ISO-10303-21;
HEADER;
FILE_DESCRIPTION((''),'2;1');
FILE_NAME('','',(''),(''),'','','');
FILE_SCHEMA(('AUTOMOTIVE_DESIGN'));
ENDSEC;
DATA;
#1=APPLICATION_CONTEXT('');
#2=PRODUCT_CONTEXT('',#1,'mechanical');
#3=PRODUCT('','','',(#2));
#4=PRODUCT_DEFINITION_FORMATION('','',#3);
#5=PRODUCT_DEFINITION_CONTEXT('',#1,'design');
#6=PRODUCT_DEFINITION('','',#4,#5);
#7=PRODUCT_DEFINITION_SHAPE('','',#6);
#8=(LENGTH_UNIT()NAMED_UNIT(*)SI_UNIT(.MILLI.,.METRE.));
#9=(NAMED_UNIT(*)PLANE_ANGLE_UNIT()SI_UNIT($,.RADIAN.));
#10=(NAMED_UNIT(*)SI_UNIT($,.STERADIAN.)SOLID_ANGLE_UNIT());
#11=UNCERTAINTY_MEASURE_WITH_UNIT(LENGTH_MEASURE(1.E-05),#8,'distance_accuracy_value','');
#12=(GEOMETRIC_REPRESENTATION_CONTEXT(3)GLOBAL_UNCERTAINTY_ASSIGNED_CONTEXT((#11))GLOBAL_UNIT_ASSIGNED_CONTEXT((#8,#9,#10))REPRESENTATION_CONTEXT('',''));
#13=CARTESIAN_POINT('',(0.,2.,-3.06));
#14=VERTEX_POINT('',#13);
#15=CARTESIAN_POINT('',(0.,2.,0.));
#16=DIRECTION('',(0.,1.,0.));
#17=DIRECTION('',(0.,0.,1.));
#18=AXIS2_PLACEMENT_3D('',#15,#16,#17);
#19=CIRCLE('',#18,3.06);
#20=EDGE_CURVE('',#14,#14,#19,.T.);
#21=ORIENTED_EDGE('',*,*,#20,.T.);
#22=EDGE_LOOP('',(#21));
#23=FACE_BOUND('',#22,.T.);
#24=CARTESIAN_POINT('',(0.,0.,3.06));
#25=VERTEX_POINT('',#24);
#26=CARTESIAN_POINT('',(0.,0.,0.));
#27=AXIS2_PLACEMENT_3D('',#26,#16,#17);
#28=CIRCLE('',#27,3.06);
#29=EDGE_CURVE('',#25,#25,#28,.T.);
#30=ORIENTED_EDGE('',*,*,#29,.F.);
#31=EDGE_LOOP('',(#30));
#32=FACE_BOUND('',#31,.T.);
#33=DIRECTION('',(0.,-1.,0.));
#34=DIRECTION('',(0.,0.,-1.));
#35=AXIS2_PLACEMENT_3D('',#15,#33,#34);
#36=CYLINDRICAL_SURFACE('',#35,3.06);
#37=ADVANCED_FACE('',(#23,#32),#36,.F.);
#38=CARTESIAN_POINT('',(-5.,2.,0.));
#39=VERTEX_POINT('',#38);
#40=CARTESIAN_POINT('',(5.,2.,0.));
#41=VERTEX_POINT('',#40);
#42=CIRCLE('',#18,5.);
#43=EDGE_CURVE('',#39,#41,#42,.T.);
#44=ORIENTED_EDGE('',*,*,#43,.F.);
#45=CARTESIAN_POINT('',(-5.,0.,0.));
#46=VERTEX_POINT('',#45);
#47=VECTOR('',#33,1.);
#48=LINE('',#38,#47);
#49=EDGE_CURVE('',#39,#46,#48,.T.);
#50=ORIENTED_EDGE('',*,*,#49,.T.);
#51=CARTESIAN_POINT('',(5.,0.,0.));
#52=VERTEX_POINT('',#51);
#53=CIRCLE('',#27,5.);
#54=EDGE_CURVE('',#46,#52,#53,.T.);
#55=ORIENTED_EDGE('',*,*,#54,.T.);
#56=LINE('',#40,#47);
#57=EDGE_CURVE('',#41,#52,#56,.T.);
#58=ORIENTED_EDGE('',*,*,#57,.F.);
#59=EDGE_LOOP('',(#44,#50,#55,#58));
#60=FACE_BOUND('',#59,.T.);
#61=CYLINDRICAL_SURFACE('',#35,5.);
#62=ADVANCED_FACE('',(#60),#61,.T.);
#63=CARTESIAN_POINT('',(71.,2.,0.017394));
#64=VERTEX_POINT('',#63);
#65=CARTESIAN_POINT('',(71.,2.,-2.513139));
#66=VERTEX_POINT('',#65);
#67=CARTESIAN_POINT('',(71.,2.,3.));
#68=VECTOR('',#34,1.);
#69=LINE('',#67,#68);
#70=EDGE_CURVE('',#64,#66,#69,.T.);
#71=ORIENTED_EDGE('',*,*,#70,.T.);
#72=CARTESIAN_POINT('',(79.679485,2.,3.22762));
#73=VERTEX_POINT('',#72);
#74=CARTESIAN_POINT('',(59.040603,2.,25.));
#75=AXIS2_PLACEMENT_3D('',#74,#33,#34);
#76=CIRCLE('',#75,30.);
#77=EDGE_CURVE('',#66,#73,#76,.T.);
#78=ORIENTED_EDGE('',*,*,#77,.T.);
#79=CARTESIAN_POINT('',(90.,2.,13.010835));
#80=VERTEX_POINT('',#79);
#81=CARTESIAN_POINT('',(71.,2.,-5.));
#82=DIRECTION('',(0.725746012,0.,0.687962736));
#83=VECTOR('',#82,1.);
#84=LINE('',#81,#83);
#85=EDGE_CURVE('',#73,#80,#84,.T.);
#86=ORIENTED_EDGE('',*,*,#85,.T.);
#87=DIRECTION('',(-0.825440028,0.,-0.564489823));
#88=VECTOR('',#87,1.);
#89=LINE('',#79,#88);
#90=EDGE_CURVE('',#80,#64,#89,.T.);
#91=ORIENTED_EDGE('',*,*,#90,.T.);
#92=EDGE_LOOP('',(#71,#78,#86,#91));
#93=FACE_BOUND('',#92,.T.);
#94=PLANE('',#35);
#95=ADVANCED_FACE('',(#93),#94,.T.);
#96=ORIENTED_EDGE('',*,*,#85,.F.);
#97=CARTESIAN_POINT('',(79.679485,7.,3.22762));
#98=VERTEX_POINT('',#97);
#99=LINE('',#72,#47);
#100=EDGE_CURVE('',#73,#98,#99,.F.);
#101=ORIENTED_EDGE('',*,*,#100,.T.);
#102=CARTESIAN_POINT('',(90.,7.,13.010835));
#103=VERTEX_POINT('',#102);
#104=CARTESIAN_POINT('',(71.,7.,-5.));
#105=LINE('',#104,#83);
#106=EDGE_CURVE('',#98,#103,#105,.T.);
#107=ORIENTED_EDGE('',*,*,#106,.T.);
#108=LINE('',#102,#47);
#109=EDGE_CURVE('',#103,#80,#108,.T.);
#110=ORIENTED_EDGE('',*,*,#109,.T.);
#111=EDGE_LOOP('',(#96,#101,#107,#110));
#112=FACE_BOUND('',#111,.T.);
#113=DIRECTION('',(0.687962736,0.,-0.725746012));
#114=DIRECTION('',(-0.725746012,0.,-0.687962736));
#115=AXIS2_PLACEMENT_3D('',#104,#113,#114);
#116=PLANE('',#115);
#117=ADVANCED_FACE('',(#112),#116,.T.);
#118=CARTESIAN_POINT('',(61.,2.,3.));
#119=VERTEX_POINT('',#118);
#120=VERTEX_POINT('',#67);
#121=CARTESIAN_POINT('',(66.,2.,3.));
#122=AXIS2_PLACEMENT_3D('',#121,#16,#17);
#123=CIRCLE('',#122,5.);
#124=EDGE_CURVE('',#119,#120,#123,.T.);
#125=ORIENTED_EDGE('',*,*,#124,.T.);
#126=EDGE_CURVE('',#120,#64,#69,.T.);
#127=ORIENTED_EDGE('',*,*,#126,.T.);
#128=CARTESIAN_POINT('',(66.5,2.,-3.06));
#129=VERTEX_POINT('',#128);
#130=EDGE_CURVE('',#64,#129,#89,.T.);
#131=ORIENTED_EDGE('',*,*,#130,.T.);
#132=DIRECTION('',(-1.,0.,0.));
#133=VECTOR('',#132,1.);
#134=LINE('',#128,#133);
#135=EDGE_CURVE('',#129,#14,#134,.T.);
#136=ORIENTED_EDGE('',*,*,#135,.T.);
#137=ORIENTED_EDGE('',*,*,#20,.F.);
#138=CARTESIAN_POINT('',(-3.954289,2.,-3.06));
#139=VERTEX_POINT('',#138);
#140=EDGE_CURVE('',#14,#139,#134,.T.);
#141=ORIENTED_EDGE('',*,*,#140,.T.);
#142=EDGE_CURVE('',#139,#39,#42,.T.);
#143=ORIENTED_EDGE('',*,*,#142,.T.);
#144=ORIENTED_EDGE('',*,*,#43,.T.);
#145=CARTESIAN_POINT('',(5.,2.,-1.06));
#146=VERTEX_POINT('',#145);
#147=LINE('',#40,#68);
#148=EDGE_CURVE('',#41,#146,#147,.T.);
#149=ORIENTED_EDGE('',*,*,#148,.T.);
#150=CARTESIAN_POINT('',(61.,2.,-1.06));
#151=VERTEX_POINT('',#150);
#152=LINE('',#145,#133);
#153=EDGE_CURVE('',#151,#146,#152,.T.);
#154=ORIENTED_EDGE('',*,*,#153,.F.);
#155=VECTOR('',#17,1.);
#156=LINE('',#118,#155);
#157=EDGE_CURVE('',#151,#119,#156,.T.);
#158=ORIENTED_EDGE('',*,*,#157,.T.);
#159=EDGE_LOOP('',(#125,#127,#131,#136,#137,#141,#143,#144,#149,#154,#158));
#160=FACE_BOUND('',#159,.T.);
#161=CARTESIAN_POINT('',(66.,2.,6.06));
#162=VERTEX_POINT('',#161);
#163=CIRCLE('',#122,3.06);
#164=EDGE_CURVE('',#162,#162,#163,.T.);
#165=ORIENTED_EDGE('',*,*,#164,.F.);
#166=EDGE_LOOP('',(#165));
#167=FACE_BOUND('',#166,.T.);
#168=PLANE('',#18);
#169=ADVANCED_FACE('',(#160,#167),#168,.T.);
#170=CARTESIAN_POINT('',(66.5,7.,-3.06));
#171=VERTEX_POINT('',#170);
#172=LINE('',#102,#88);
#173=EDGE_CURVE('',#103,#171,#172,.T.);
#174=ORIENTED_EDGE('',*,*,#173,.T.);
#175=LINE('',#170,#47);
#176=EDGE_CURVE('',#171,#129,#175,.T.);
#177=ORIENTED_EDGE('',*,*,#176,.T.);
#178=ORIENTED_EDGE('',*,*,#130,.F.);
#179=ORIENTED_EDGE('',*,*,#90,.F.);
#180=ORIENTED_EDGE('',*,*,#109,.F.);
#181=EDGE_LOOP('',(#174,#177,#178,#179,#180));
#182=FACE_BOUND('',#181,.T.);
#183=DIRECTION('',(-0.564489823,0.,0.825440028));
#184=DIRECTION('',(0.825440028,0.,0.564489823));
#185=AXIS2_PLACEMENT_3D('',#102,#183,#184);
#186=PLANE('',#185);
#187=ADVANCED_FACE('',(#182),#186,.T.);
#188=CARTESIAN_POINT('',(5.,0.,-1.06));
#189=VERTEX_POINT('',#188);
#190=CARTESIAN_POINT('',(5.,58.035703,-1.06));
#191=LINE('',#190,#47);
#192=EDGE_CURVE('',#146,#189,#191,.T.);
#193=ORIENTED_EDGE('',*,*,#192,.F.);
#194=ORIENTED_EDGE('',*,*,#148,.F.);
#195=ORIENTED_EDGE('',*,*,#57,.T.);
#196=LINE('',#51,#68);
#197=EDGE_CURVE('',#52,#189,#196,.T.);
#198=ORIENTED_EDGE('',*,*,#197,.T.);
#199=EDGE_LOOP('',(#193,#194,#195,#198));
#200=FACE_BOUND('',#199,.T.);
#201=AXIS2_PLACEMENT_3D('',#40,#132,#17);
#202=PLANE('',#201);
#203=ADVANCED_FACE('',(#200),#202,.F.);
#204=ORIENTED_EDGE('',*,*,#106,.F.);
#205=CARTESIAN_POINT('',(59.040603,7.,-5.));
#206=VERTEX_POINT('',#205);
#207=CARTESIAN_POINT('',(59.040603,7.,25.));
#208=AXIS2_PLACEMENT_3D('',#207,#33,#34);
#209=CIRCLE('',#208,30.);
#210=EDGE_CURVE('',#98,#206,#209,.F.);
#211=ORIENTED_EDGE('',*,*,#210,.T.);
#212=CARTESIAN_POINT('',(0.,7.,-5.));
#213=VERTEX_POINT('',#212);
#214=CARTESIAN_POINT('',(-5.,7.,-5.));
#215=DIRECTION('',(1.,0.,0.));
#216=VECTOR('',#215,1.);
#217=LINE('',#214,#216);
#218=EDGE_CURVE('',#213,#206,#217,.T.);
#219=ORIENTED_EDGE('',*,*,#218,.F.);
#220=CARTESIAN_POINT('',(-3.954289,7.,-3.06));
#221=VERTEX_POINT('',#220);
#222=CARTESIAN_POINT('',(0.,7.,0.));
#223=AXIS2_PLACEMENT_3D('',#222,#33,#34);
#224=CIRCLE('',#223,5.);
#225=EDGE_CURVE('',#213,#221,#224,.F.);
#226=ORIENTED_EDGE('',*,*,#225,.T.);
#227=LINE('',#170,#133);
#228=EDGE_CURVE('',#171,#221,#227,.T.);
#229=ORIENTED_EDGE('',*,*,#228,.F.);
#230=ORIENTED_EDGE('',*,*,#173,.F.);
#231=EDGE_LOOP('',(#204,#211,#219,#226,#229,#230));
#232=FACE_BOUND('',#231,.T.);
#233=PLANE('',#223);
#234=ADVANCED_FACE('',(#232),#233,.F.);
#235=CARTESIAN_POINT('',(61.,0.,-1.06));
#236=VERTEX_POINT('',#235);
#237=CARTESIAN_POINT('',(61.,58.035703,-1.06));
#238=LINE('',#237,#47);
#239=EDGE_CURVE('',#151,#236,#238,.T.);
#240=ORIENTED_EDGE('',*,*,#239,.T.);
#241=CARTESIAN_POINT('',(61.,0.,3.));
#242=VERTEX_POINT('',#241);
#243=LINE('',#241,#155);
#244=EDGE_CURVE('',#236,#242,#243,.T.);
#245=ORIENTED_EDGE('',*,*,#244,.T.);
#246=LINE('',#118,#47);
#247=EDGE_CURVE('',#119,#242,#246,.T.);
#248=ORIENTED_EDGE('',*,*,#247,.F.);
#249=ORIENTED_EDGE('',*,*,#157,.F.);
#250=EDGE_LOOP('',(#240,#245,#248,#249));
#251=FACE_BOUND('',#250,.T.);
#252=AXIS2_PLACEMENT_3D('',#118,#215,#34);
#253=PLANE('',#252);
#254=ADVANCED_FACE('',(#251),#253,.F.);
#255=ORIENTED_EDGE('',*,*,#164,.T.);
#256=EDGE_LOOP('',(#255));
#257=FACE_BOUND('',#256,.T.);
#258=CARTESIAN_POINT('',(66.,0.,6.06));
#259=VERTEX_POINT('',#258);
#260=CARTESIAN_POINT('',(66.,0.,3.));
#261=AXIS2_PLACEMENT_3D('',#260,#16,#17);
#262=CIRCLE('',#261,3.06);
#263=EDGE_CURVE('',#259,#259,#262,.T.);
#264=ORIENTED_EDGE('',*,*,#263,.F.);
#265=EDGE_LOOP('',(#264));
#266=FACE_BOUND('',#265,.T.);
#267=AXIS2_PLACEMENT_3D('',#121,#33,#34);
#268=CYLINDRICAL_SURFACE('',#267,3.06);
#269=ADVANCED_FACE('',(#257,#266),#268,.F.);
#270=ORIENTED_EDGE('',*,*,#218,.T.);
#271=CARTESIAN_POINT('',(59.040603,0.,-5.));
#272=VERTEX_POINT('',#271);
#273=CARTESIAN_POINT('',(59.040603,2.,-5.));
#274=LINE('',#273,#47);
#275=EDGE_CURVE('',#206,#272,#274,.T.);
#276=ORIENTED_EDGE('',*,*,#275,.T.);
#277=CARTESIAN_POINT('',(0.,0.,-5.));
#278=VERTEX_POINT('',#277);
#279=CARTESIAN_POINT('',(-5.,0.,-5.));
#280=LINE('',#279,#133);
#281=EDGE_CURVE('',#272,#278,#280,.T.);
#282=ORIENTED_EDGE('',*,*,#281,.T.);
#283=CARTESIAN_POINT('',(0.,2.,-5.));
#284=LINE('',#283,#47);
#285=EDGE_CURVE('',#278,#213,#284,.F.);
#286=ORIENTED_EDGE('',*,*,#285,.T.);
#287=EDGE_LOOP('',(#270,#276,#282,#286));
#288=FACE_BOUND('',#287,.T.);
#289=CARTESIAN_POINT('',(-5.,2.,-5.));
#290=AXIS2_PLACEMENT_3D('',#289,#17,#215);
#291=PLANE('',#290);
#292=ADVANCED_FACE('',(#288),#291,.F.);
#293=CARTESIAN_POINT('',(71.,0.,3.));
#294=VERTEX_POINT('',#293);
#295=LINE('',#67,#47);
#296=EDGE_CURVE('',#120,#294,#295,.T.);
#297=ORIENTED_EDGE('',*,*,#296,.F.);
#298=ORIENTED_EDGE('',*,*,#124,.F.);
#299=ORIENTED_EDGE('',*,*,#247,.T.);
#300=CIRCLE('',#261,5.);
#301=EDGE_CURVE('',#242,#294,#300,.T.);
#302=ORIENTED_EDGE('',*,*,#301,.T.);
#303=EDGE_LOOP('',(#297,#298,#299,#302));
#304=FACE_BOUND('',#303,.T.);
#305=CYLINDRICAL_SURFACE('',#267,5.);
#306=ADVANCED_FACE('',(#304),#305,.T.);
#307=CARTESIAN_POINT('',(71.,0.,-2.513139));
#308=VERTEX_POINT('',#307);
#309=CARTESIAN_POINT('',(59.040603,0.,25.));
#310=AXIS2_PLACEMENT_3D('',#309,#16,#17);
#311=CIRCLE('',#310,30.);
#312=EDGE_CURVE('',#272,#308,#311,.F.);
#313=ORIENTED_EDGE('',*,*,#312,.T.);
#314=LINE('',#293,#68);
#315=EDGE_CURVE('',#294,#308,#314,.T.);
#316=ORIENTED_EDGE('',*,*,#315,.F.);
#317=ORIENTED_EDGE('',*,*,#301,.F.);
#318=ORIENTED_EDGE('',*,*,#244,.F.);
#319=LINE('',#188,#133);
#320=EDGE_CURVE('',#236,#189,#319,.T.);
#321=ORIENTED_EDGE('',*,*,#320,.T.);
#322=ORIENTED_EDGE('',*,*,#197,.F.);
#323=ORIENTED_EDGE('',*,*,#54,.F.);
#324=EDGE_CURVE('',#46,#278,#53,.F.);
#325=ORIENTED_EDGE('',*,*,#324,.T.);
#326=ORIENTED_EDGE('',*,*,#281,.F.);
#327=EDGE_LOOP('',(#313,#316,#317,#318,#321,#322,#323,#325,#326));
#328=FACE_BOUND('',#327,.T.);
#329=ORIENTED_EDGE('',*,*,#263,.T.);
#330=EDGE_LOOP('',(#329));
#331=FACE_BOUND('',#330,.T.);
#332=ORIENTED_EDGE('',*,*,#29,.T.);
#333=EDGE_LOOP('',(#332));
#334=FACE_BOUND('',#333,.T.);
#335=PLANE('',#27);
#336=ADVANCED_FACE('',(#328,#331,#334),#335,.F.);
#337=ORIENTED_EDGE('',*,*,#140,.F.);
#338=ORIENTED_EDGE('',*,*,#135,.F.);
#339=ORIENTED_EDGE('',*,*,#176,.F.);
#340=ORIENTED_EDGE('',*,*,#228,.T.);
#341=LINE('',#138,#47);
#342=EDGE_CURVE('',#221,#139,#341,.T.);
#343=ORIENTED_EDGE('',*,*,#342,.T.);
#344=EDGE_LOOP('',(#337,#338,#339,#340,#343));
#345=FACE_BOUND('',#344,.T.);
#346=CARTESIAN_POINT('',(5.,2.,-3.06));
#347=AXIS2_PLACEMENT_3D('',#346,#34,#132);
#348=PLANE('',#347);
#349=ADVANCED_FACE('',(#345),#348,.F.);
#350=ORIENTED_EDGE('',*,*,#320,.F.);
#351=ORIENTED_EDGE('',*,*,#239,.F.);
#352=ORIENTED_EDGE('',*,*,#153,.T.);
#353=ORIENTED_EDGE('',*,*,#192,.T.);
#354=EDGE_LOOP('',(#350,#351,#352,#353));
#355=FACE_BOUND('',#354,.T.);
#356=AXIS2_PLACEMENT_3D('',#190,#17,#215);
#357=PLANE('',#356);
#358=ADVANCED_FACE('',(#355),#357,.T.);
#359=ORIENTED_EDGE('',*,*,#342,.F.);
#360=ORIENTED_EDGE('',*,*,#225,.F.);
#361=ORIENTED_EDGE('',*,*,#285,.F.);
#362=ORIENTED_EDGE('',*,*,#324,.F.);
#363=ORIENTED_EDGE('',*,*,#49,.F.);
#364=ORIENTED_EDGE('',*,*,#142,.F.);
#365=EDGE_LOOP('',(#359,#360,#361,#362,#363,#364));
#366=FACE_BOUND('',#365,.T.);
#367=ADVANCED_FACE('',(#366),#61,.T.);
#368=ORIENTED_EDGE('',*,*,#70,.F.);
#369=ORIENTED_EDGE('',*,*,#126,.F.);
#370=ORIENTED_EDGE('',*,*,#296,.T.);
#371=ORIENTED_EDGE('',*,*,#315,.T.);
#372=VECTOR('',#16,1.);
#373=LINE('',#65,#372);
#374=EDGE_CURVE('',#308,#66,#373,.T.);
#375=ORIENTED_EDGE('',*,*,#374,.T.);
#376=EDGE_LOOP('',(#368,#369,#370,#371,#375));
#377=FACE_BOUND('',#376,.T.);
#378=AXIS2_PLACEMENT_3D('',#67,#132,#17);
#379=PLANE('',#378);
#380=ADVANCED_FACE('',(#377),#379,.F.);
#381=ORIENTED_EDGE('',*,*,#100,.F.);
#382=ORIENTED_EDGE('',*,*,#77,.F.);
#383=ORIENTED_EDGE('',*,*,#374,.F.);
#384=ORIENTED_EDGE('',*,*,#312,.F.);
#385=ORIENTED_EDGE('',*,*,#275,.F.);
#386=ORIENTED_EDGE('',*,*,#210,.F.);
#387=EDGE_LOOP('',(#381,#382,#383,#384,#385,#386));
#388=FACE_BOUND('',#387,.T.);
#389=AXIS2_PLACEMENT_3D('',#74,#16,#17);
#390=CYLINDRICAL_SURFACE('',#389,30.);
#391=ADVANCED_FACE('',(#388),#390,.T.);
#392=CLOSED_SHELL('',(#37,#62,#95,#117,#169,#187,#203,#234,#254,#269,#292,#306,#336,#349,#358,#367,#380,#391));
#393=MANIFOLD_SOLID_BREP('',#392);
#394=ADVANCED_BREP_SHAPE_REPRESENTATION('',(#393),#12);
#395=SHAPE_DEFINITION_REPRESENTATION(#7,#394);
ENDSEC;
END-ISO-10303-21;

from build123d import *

# Parameters (mm, degrees)
SKETCH1_R           = 3.06
BOSS_EXTRUDE1_DEPTH = 2
BOSS_EXTRUDE2_START = -2
BOSS_EXTRUDE2_DEPTH = 5
SKETCH6_W           = 56
SKETCH6_H           = 2
BOSS_EXTRUDE3_DEPTH = 2
FILLET1_R           = 30
FILLET2_R           = 5


with BuildPart() as part:
    # Sketch1 → Boss-Extrude1 (new body)
    with BuildSketch(Plane(origin=(0, 0, 0), x_dir=(1, 0, 0), z_dir=(0, 1, 0))):
        with BuildLine():
            Line((-5, 0), (-5, 5))
            Line((-5, 5), (71, 5))
            Line((71, 5), (71, -3))
            ThreePointArc((71, -3), (66, -8), (61, -3))
            Line((61, -3), (61, 3.06))
            Line((61, 3.06), (5, 3.06))
            Line((5, 3.06), (5, 0))
            ThreePointArc((5, 0), (0, -5), (-5, 0))
        make_face()
        with Locations(Location((0, 0, 0), (0, 0, 270))):
            Circle(SKETCH1_R, mode=Mode.SUBTRACT)
        with Locations(Location((66, -3, 0), (0, 0, 270))):
            Circle(SKETCH1_R, mode=Mode.SUBTRACT)
    extrude(amount=BOSS_EXTRUDE1_DEPTH)

    # Sketch4 → Boss-Extrude2 (add)
    with BuildSketch(Plane(origin=(0, 0, 0), x_dir=(-1, 0, 0), z_dir=(0, -1, 0)).offset(BOSS_EXTRUDE2_START)):
        Polygon((5, 5), (-71, 5), (-90, -13.010835443), (-66.5, 3.06), (5, 3.06), align=None)
    extrude(amount=-BOSS_EXTRUDE2_DEPTH)

    # Sketch6 → Boss-Extrude3 (add)
    with BuildSketch(Plane(origin=(0, 0, 0), x_dir=(-1, 0, 0), z_dir=(0, -1, 0))):
        with Locations((-33, 2.06)):
            Rectangle(SKETCH6_W, SKETCH6_H)
    extrude(amount=-BOSS_EXTRUDE3_DEPTH)

    # Fillet1
    # the kernel refuses this fillet: 30 mm, written as the material it takes off along each edge
    with BuildSketch(Plane(origin=(71, -27.8984931, -5), x_dir=(0.7257460116750271, 0, 0.6879627363002968), z_dir=(0, 1, 0))) as fillet1_piece_1:
        with BuildLine():
            CenterArc((FILLET1_R * 0.398646574667, -FILLET1_R), FILLET1_R, 90, 43.469057367)
            Line((-FILLET1_R * 0.289316161633, -FILLET1_R * 0.274253988325), (0, 0))
            Line((0, 0), (FILLET1_R * 0.398646574667, 0))
        make_face()
    extrude(amount=64.7969862, mode=Mode.SUBTRACT)

    # Fillet2
    # the kernel refuses this fillet: 5 mm, written as the material it takes off along each edge
    with BuildSketch(Plane(origin=(-5, 19.5, -5), x_dir=(0, 0, 1), z_dir=(0, -1, 0))) as fillet2_piece_1:
        with BuildLine():
            CenterArc((FILLET2_R, -FILLET2_R), FILLET2_R, 90, 90)
            Line((0, -FILLET2_R), (0, 0))
            Line((0, 0), (FILLET2_R, 0))
        make_face()
    extrude(amount=32, mode=Mode.SUBTRACT)


solid = part.part
